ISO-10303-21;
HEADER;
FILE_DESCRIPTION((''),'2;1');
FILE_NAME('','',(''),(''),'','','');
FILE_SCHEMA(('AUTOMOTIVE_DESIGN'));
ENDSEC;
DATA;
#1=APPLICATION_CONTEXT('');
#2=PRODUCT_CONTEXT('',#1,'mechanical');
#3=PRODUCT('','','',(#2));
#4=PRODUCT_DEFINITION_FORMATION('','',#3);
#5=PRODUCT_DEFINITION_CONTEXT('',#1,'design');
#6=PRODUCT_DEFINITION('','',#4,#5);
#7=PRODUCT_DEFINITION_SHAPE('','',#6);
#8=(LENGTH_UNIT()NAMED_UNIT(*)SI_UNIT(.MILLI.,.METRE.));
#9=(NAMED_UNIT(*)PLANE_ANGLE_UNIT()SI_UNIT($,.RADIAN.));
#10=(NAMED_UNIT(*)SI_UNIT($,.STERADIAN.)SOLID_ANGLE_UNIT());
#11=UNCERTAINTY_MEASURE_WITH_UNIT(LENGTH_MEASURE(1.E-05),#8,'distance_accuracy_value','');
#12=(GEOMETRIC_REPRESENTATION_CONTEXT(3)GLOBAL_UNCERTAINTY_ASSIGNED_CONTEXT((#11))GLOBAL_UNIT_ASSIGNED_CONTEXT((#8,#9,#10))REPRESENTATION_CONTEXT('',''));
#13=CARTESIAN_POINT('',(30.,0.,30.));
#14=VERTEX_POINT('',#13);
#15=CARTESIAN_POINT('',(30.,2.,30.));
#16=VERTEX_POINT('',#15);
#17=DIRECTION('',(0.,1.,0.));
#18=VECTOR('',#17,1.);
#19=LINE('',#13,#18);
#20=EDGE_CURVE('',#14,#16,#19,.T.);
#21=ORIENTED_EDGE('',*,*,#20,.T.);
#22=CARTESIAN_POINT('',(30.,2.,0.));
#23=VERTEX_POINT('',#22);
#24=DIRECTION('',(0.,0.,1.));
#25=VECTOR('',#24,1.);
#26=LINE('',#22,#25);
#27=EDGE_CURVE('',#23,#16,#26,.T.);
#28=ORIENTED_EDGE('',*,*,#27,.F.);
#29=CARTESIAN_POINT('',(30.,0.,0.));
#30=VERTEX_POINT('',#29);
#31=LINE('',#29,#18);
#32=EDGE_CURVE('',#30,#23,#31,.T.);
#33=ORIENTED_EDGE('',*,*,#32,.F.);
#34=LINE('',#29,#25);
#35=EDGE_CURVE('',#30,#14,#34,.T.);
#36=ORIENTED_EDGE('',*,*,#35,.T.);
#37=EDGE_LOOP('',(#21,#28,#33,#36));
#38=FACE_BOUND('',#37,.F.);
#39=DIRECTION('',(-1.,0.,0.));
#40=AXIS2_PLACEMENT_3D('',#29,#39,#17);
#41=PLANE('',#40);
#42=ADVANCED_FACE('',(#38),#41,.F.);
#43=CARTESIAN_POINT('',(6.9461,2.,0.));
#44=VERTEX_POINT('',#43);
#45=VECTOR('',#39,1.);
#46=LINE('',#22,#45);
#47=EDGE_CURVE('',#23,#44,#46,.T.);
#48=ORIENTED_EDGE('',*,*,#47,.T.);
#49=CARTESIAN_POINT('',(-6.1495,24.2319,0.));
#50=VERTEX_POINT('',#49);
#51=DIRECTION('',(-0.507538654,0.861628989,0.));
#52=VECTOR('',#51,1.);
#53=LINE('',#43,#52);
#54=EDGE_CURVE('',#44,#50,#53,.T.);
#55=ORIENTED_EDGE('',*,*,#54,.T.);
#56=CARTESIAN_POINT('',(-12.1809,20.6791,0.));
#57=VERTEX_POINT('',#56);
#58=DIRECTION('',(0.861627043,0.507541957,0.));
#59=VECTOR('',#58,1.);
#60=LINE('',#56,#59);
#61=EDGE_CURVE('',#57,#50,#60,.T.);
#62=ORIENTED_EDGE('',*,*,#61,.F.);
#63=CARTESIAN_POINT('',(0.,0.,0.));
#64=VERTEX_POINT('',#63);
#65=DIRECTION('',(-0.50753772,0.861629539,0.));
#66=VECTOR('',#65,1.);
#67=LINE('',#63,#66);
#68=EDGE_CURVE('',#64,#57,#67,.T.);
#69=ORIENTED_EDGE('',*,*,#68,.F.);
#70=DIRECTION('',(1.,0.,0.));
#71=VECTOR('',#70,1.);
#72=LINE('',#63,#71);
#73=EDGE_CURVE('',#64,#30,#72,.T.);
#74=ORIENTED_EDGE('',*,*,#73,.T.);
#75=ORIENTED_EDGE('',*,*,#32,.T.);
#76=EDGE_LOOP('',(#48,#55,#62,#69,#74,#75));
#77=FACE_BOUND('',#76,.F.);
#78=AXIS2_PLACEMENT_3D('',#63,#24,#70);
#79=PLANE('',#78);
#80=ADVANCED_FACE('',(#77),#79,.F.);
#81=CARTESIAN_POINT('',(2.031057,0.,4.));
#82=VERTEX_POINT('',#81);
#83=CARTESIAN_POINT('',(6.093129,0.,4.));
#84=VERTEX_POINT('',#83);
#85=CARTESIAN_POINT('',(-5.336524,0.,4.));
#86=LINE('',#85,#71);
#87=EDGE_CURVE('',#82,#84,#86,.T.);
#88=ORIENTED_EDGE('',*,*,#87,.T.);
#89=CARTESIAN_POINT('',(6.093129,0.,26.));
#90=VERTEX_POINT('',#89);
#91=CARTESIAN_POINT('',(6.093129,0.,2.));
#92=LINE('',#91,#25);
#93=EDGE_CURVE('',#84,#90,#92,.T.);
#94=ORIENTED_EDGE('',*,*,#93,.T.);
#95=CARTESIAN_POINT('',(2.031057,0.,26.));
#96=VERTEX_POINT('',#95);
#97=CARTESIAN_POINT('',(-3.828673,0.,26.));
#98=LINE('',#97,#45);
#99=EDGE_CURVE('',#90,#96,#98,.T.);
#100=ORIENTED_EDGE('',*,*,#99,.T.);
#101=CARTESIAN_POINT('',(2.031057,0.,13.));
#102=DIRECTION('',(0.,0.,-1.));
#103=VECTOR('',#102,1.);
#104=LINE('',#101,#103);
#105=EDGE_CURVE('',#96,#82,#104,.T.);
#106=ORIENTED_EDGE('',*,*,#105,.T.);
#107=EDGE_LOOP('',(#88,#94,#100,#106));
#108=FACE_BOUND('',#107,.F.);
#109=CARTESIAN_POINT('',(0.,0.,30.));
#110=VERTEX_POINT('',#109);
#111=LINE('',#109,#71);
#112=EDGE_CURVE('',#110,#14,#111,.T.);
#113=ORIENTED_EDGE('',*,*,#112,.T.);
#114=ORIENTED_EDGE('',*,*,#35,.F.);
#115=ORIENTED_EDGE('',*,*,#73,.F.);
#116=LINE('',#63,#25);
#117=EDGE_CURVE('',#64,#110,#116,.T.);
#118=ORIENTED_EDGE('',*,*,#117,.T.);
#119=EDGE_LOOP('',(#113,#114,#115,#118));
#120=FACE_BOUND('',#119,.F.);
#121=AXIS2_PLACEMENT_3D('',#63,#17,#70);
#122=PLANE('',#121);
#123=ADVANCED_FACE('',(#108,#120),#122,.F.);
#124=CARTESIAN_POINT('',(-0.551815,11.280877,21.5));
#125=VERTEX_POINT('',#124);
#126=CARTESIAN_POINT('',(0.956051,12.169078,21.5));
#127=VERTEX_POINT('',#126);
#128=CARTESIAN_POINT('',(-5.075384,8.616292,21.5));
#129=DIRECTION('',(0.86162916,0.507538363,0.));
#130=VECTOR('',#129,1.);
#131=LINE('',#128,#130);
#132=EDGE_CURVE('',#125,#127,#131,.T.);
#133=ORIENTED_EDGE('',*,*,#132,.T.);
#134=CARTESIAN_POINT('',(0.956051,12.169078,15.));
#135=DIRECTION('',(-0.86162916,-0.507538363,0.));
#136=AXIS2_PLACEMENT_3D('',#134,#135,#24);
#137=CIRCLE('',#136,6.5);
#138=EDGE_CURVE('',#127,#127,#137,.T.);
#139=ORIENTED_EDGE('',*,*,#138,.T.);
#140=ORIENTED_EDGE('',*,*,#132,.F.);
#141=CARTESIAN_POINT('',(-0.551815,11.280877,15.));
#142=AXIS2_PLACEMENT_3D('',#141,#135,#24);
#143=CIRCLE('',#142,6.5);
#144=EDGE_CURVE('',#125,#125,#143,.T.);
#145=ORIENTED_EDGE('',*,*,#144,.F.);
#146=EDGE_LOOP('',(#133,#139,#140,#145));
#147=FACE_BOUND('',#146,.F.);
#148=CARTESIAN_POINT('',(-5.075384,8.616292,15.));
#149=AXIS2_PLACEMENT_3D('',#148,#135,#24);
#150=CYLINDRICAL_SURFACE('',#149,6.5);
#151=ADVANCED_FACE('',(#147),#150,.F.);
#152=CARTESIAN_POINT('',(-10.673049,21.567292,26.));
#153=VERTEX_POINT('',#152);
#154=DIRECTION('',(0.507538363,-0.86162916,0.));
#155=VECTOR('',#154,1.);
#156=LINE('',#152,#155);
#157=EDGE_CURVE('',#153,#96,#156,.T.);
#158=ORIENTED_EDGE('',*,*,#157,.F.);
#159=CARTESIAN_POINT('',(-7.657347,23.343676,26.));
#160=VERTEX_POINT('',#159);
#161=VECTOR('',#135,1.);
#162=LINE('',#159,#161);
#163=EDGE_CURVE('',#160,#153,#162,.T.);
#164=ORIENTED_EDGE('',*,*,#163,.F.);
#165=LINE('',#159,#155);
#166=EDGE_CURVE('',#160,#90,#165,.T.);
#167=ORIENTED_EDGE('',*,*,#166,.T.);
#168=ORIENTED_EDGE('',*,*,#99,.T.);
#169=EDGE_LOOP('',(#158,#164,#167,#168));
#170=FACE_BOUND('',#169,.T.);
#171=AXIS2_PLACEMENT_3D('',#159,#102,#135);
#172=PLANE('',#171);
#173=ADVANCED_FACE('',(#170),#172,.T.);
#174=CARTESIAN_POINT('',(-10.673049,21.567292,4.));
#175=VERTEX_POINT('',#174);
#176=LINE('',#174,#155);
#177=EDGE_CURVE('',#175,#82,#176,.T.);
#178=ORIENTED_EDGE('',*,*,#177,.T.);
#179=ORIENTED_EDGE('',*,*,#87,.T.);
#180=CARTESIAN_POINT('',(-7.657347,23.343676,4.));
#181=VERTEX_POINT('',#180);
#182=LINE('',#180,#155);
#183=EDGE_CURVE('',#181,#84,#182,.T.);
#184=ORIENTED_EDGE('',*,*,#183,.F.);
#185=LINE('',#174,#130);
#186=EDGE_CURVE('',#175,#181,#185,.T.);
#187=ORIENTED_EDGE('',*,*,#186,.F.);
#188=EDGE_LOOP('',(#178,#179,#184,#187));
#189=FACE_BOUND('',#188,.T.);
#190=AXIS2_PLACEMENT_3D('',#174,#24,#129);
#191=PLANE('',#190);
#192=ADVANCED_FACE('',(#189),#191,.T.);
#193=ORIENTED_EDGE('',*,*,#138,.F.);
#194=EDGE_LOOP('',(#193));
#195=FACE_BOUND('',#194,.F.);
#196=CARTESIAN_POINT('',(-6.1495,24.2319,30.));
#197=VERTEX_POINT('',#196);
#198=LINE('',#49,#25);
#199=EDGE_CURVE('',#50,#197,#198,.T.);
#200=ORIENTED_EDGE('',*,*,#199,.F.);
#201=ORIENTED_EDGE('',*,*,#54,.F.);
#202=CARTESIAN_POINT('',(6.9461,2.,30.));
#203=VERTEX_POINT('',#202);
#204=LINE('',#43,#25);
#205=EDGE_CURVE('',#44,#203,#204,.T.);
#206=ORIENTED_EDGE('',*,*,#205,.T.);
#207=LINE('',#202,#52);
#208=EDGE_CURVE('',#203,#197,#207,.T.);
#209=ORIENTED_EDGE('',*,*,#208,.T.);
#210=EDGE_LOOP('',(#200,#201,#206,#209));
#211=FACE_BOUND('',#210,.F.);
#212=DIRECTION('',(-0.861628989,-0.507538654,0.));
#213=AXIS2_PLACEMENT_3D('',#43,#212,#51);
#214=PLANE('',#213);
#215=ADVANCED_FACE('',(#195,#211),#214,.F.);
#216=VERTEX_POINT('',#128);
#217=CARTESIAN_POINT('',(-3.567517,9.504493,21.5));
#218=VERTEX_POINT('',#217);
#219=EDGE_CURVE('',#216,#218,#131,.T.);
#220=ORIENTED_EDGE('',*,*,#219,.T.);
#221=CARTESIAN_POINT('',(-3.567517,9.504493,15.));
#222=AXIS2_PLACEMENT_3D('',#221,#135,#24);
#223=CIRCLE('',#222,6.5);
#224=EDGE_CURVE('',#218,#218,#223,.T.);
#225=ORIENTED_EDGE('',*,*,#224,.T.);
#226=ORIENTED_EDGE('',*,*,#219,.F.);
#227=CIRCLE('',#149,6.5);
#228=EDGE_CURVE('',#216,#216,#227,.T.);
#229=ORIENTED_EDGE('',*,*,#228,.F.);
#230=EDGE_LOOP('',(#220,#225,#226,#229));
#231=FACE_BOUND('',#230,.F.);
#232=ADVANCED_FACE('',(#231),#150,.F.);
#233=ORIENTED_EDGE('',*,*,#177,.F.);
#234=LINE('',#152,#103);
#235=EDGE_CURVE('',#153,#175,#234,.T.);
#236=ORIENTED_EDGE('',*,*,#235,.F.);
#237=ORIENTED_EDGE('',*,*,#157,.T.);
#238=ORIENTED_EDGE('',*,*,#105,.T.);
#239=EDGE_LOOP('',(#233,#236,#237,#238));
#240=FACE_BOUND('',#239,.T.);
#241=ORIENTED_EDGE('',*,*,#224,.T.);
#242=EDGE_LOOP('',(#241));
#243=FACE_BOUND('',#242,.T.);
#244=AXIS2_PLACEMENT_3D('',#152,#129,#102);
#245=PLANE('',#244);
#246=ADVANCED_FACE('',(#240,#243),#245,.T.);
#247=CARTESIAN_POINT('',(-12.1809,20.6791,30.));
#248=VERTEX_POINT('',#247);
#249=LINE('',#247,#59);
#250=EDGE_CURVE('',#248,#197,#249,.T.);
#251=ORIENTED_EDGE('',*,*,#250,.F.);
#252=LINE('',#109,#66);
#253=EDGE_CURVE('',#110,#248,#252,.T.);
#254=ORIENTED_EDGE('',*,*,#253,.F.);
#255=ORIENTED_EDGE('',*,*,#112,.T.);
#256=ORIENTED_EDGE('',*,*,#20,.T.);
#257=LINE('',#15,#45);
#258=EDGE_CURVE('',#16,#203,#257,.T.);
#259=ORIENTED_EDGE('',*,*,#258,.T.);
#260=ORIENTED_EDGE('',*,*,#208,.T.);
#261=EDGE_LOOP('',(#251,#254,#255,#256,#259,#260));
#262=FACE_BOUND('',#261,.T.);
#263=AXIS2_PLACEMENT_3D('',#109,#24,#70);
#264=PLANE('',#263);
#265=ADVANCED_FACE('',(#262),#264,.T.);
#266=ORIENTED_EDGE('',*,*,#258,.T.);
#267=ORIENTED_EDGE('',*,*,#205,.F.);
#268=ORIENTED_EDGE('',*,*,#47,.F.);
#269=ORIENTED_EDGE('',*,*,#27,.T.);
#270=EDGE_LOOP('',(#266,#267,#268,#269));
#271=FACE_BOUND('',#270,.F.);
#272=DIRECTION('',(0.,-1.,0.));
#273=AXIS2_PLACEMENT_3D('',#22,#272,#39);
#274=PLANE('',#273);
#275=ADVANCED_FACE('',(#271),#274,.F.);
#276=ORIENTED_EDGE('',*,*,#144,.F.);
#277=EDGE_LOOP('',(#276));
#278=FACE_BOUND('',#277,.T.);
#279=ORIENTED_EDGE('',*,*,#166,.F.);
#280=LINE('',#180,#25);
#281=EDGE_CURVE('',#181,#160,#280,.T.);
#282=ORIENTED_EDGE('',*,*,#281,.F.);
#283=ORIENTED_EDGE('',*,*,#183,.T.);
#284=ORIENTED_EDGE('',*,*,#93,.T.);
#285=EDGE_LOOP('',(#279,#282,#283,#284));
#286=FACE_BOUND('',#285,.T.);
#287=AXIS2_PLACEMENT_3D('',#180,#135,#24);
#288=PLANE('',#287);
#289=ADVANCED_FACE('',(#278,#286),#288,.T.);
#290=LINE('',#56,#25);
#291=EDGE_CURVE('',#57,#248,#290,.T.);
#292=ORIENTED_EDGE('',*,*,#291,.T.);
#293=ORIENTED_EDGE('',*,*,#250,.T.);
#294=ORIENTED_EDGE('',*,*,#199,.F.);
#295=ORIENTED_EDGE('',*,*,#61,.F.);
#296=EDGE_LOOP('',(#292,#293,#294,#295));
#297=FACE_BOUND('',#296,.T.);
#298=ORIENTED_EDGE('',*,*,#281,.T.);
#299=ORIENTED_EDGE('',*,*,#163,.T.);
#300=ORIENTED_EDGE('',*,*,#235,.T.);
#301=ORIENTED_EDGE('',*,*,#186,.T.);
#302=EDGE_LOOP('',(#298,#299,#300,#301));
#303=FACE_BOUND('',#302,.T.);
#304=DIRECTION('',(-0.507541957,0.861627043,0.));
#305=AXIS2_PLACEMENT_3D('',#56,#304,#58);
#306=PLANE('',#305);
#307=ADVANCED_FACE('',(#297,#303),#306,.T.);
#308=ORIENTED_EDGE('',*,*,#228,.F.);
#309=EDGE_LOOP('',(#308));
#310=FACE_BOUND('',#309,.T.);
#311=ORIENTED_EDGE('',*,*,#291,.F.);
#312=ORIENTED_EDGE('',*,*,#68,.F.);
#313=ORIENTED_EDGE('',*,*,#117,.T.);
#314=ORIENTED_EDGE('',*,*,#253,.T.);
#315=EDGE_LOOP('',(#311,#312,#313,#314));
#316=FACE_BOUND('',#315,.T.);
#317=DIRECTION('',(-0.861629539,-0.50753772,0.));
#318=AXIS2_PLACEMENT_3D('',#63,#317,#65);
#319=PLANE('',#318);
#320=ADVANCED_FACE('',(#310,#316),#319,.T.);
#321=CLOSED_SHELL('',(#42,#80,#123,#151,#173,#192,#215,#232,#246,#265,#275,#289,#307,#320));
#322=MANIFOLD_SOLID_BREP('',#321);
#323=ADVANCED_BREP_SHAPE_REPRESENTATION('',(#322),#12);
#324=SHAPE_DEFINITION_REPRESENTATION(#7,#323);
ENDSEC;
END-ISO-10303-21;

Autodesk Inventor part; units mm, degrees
ref_plane "YZ Plane" through (0, 0, 0) normal (1, 0, 0) x (0, 1, 0)
ref_plane "XZ Plane" through (0, 0, 0) normal (0, 1, 0) x (-1, 0, 0)
ref_plane "XY Plane" through (0, 0, 0) normal (0, 0, 1) x (1, 0, 0)
sketch "Sketch1" plane through (0, 0, 0) normal (0, 0, 1) x (1, 0, 0)
  line L0 (0, 0) -> (30, 0)
  line L1 (0, 0) -> (-12.1809, 20.6791)
  line L2 (0, 0) -> (24, 0) construction
  line L3 (-12.1809, 20.6791) -> (-6.1495, 24.2319)
  line L4 (30, 0) -> (30, 2)
  line L5 (30, 2) -> (6.9461, 2)
  line L6 (6.9461, 2) -> (-6.1495, 24.2319)
  dimension "d0" = 30
  dimension "d1" = 24
  dimension "d2" = 120.5
  dimension "d3" = 7
  dimension "d4" = 2
extrude "Extrusion1" add sketch "Sketch1" along normal blind 30
sketch "Sketch2" plane through (-12.1809, 20.6791, 30) normal (-0.5075384, 0.8616292, 0) x (0.8616292, 0.5075384, 0)
  line L0 (1.75, 26) -> (5.25, 26)
  line L1 (5.25, 26) -> (5.25, 4)
  line L2 (5.25, 4) -> (1.75, 4)
  line L3 (1.75, 4) -> (1.75, 26)
  line L4 (7, 30) -> (7, 0) projected
  line L5 (0, 30) -> (0, 0) projected
  line L6 (7, 0) -> (0, 0) projected
  line L7 (7, 30) -> (0, 30) projected
  dimension "d7" = 22
  dimension "d8" = 3.5
  dimension "d9" = 7
  dimension "d10" = 30
  dimension "d11" = 4
  dimension "d12" = 1.75
extrude "Extrusion2" cut sketch "Sketch2" against normal through all contours L0 L1 L2 L3
sketch "Sketch3" plane through (0, 0, 0) normal (-0.8616292, -0.5075384, 0) x (0, 0, 1)
  circle A0 centre (15, 10) radius 6.5
  line L0 (30, 24) -> (30, 0) projected
  line L1 (0, 24) -> (0, 0) projected
  line L2 (0, 24) -> (30, 24) projected
  dimension "d15" = 13
  dimension "d16" = 30
  dimension "d17" = 15
  dimension "d18" = 14
extrude "Extrusion3" cut sketch "Sketch3" against normal through all
equation "\"d11\" = -0.5 * d7 + 0.5 * d10"
equation "\"d12\" = -0.5 * d8 + 0.5 * d9"
equation "\"d17\" = 0.5 * d16"
properties part number "vtail_wing_piece"
